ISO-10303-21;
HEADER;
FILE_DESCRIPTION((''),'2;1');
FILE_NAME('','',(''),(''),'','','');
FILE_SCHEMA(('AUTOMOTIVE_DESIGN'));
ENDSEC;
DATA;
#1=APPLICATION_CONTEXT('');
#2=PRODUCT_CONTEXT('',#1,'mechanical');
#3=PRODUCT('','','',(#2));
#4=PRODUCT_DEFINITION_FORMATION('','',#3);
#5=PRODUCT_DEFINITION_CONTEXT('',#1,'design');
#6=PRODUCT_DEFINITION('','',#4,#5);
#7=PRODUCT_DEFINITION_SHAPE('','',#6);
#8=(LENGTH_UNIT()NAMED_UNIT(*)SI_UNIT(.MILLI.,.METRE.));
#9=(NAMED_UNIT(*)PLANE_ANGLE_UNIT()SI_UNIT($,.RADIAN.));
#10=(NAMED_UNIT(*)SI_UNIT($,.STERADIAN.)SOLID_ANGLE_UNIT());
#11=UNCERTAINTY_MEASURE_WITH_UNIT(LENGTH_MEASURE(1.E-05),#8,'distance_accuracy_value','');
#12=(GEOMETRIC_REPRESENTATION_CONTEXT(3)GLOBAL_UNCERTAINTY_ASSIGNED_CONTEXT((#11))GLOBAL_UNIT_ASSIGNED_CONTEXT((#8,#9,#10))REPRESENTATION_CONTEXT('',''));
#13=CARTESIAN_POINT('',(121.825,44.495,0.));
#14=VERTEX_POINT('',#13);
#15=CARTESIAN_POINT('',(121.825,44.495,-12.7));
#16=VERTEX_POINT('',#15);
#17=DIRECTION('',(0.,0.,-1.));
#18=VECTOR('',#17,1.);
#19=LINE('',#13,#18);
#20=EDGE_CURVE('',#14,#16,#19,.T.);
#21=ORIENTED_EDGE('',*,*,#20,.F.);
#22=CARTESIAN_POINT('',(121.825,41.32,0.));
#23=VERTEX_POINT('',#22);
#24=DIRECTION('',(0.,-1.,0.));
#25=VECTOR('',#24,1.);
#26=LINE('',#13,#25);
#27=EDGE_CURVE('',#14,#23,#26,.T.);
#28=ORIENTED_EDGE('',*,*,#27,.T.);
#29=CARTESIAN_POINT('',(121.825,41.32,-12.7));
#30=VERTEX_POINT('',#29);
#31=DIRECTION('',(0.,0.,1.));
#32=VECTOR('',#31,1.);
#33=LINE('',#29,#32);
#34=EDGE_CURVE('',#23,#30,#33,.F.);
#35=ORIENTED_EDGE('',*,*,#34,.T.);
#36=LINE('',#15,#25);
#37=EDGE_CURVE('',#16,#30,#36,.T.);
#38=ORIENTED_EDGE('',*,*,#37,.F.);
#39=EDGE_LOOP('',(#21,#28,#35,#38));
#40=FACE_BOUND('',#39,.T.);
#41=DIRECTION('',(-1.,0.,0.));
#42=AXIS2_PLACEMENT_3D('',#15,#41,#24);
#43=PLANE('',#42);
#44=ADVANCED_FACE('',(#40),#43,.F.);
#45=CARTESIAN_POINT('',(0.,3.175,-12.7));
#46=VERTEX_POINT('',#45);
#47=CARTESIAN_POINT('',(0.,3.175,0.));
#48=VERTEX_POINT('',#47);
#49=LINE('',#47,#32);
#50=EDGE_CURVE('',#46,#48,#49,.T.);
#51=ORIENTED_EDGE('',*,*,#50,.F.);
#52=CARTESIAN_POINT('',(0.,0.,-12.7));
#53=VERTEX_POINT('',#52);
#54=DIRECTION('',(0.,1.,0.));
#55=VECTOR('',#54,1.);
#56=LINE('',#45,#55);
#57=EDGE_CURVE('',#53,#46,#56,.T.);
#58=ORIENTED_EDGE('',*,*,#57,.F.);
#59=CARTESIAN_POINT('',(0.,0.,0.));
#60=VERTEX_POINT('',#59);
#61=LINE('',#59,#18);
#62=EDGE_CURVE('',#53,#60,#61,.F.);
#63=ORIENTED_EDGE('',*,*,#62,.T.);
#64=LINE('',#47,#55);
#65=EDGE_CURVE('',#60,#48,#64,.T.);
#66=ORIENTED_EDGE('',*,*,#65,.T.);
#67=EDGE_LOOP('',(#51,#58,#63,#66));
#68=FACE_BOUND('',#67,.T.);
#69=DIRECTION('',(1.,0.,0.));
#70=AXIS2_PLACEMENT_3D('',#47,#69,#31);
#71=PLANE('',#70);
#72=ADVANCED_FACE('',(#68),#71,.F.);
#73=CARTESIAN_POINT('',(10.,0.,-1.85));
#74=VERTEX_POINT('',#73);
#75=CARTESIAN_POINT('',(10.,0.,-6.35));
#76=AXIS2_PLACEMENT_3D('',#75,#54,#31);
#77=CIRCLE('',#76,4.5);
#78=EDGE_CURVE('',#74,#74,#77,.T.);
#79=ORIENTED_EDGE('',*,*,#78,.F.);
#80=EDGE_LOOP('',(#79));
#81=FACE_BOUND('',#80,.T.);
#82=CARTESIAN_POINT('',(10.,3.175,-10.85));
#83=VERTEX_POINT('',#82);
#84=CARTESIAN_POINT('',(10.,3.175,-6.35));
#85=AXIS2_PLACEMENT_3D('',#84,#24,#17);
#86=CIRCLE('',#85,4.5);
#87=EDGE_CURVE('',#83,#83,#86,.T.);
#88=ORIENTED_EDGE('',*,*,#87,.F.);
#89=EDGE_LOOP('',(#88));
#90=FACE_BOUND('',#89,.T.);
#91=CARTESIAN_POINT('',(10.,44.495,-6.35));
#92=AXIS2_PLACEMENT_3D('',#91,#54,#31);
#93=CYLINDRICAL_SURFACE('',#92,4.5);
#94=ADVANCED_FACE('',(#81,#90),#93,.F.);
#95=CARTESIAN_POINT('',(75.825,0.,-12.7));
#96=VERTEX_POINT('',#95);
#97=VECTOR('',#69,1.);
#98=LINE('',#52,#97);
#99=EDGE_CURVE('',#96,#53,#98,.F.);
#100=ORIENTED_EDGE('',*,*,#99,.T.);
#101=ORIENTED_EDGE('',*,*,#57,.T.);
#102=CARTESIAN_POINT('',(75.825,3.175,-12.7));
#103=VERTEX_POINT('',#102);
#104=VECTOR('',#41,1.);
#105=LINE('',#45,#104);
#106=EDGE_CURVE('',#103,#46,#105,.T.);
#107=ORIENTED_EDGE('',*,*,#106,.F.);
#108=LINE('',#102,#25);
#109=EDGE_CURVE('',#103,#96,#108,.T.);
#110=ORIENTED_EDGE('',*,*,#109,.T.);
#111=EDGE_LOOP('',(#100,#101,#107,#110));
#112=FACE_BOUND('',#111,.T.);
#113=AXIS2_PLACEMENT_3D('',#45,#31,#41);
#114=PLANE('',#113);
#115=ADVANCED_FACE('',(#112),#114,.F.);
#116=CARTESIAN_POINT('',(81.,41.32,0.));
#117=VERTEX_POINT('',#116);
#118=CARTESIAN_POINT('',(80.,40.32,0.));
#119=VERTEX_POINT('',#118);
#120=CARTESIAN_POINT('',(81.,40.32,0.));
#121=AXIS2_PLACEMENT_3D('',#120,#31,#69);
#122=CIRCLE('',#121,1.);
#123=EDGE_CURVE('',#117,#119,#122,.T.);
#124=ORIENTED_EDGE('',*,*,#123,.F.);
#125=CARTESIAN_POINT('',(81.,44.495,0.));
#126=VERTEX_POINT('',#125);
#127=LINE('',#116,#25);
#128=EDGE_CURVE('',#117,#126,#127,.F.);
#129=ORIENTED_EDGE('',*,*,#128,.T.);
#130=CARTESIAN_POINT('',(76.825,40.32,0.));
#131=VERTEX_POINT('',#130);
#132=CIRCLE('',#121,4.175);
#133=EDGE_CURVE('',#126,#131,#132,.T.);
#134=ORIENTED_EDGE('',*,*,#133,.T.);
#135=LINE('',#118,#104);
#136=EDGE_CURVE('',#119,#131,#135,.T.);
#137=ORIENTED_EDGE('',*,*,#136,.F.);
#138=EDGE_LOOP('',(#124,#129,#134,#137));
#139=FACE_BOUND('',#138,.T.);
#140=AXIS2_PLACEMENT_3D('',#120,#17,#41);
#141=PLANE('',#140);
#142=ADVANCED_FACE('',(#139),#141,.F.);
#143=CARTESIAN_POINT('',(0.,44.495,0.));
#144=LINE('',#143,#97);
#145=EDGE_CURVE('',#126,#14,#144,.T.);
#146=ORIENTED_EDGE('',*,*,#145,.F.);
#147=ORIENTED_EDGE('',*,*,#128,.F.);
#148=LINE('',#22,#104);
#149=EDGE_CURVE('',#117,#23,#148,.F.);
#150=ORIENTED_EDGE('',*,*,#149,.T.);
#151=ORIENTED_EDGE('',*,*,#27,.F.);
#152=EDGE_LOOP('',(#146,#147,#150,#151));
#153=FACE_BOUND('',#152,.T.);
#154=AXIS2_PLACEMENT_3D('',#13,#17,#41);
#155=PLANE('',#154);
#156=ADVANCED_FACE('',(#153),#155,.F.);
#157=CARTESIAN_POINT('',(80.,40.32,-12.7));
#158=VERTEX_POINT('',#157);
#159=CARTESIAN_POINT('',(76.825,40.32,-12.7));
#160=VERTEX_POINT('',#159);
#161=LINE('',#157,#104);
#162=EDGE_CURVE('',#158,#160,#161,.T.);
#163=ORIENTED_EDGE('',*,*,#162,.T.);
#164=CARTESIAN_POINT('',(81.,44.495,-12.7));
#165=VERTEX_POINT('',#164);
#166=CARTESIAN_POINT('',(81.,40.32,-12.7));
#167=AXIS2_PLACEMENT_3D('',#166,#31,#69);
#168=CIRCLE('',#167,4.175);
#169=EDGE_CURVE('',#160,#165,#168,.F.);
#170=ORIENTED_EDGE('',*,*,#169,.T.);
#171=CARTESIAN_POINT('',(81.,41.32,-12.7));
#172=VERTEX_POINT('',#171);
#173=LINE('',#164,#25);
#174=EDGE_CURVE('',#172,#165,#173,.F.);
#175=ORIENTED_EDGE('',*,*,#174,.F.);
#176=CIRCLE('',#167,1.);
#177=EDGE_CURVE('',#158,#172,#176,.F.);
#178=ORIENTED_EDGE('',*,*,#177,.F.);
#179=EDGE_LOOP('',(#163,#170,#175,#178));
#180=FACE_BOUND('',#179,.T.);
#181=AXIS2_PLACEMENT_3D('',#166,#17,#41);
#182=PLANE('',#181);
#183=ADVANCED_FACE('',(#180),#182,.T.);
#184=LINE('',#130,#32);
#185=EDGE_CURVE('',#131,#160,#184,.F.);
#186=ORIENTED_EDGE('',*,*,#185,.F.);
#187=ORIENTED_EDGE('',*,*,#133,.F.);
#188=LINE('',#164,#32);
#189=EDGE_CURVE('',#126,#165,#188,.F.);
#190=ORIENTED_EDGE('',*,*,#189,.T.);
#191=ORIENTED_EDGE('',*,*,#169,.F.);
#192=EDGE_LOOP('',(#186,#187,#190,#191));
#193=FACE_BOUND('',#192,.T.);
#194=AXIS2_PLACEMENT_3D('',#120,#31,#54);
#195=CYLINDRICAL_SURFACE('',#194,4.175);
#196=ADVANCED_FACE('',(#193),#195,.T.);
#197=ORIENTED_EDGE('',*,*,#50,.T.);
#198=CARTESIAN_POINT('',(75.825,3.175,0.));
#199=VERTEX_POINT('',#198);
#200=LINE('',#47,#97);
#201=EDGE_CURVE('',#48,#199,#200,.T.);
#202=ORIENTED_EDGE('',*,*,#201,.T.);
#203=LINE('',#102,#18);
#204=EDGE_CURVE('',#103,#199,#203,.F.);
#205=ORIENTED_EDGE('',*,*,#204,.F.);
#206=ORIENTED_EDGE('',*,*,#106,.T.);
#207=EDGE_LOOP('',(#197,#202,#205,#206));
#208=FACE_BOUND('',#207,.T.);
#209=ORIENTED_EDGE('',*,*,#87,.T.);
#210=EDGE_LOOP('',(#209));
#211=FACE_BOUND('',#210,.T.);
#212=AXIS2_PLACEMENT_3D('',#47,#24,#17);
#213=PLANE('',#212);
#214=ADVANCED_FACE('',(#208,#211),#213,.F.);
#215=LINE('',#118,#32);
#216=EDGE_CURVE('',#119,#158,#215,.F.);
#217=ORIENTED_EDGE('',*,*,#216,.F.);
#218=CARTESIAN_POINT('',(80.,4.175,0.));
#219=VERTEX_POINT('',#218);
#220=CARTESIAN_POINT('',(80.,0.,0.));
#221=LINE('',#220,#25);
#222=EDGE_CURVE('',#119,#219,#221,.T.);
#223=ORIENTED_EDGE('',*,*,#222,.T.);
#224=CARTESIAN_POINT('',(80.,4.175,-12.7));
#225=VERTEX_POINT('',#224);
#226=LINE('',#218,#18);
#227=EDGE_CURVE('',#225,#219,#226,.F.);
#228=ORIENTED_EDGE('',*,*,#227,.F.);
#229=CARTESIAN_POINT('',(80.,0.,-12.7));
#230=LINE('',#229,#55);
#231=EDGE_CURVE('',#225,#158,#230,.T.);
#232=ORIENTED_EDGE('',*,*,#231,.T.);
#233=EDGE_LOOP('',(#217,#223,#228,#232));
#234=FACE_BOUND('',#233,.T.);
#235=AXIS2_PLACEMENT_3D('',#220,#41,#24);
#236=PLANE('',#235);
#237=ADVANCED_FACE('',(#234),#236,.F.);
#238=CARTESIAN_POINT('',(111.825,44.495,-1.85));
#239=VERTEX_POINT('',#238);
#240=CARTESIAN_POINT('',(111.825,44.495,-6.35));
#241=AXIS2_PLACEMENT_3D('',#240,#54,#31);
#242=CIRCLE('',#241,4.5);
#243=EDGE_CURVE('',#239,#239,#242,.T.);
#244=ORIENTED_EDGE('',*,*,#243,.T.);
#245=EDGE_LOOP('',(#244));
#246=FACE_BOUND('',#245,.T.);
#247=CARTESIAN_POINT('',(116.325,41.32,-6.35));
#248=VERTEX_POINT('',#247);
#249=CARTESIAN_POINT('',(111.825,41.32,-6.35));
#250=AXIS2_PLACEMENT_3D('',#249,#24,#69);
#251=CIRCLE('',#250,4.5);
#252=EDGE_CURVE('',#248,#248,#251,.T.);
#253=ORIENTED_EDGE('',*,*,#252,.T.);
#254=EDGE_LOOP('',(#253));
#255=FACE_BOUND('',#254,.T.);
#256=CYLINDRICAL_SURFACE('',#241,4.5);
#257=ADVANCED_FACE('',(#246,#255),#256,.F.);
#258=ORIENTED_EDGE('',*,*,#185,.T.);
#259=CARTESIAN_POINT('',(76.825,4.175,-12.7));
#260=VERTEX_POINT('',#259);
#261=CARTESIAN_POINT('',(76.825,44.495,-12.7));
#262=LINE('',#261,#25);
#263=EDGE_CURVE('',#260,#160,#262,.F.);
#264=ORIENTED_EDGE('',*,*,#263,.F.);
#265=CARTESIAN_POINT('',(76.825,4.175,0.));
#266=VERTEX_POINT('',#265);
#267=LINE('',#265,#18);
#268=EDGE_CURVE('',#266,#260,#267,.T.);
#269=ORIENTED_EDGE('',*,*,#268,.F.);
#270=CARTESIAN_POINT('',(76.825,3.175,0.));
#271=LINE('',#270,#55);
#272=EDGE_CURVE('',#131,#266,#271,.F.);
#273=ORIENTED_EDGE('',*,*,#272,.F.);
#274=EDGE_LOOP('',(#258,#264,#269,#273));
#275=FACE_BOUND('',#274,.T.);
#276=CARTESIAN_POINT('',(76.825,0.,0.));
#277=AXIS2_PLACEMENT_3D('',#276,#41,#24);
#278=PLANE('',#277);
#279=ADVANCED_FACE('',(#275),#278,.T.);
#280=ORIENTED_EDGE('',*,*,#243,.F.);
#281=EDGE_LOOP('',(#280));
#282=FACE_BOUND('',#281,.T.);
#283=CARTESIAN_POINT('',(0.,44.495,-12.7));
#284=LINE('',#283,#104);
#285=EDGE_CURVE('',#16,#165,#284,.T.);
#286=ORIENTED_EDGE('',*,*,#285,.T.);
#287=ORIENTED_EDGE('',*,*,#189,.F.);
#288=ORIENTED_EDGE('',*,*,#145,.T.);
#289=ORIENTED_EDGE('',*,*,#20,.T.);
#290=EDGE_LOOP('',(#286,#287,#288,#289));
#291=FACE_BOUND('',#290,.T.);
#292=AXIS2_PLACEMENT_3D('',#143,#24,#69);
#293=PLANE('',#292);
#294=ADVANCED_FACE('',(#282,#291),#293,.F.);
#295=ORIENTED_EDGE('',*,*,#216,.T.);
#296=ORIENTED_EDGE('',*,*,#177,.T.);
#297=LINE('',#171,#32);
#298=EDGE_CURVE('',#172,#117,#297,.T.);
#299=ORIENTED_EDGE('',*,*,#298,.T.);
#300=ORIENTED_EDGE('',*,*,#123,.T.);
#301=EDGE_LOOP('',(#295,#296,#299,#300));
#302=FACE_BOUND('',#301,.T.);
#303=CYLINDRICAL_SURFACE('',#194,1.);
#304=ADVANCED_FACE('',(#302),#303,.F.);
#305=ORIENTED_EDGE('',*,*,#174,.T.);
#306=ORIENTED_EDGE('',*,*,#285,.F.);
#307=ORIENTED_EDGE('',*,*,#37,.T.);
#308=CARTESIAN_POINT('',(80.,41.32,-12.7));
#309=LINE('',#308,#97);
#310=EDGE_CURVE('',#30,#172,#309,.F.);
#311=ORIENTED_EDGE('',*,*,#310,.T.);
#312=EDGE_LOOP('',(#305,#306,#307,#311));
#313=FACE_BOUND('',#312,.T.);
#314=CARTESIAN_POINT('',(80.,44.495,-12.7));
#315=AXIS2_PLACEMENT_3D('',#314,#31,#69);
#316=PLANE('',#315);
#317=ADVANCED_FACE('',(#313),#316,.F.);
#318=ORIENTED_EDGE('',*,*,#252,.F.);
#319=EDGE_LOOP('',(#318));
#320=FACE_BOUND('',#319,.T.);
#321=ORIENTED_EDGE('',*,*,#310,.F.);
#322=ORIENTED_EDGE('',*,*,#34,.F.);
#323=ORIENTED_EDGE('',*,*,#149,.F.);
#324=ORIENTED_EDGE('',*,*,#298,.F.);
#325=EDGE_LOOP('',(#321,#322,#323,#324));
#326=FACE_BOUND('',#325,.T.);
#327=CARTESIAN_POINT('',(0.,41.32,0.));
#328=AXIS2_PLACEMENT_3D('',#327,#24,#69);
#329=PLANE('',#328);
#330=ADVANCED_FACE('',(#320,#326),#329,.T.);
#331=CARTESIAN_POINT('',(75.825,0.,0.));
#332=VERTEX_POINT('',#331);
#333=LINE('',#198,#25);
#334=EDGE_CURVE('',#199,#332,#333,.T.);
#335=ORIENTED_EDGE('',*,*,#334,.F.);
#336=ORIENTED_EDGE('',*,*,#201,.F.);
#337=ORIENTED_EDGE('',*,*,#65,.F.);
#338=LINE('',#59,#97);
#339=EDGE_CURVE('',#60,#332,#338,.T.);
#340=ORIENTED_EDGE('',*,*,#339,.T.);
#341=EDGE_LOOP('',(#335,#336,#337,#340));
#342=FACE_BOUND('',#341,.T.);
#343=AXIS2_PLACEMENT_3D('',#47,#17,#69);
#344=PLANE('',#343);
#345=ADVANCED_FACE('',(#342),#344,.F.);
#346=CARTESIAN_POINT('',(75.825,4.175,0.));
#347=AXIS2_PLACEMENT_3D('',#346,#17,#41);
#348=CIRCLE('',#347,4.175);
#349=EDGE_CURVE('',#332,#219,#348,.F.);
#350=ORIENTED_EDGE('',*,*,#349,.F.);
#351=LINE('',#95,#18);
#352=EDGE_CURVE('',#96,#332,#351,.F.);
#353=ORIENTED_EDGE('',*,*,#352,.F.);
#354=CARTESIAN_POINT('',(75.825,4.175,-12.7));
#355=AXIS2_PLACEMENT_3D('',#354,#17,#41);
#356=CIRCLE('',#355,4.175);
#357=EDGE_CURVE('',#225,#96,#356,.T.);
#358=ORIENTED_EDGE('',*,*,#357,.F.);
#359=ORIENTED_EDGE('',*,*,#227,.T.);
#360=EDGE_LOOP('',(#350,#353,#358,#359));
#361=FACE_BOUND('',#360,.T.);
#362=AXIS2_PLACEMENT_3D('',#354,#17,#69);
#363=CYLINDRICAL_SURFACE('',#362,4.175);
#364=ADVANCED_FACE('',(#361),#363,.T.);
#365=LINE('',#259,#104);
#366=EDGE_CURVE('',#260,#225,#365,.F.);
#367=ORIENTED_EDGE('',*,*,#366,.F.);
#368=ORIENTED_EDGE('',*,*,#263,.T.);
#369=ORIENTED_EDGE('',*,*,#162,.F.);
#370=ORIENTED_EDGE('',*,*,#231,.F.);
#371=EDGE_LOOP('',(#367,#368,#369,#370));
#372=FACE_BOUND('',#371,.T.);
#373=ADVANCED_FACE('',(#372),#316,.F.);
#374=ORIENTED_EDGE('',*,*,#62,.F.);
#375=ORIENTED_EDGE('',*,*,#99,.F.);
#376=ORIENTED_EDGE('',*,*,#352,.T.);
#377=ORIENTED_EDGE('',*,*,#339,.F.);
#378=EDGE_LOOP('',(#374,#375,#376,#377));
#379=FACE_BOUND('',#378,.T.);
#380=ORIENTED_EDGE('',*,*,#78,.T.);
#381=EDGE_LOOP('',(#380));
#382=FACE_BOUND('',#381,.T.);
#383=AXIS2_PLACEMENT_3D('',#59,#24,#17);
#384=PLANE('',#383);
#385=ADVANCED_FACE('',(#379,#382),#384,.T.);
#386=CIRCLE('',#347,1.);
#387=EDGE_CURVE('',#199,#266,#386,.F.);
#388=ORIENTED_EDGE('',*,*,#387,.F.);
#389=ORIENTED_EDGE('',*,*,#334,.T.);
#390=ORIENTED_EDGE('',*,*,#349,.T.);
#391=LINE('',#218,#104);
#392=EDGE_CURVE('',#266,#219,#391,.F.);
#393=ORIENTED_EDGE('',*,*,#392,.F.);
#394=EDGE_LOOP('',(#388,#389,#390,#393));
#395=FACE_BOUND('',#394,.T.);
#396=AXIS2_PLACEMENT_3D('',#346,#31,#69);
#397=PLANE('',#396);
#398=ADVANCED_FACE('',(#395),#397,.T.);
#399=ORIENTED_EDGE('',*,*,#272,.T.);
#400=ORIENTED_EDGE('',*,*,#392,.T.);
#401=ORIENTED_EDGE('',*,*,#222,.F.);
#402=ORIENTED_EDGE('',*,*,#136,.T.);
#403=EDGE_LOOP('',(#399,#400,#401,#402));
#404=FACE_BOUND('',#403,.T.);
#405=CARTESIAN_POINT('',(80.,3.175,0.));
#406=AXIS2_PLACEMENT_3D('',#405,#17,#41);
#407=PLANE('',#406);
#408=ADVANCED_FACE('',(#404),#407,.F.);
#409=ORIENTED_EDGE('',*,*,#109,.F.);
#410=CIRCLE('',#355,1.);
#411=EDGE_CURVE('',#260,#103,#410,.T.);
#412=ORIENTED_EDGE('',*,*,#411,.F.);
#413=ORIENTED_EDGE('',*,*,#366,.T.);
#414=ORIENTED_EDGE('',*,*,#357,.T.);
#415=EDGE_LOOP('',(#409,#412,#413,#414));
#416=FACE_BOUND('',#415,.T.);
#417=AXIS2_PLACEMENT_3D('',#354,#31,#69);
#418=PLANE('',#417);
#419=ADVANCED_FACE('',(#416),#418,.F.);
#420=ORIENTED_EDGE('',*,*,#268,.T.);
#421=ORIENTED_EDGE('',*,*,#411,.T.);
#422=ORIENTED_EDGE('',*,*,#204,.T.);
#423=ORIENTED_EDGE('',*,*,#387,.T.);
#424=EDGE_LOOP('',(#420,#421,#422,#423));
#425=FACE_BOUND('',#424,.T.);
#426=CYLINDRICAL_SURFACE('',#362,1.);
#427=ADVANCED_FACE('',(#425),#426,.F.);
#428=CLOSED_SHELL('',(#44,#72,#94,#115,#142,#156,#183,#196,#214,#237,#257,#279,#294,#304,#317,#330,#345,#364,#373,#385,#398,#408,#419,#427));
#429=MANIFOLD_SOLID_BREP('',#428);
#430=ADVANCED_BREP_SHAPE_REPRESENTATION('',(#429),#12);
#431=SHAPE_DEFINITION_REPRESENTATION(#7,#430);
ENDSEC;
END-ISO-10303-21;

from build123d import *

# Parameters (mm, degrees)
SKETCH1_W                    = 80
SKETCH1_H                    = 12.7
BOSS_EXTRUDE1_DEPTH          = 3.175
EDGE_FLANGE1_STRIP_W         = 14.7
EDGE_FLANGE1_STRIP_H         = 3.175
EDGE_FLANGE1_STRIP_CUT_DEPTH = 12.7
EDGE_FLANGE1_DEPTH           = 12.7
EDGE_FLANGE2_STRIP_W         = 14.7
EDGE_FLANGE2_STRIP_H         = 3.175
EDGE_FLANGE2_STRIP_CUT_DEPTH = 12.7
EDGE_FLANGE2_DEPTH           = 12.7
M8_CLEARANCE_HOLE1_D         = 9


# Sheet-metal steps are written as plain solids
with BuildPart() as part:
    # Sketch1 → Boss-Extrude1 (new body)
    with BuildSketch(Plane(origin=(0, 0, 0), x_dir=(1, 0, 0), z_dir=(0, 1, 0))):
        with Locations((40, 6.35)):
            Rectangle(SKETCH1_W, SKETCH1_H)
    extrude(amount=BOSS_EXTRUDE1_DEPTH)

    # Edge-Flange1 strip (across the edge) → Edge-Flange1 strip cut (cut)
    with BuildSketch(Plane(origin=(80, 3.175, 0), x_dir=(-1, 0, 0), z_dir=(0, 0, -1))):
        with Locations((-3.175, -1.5875)):
            Rectangle(EDGE_FLANGE1_STRIP_W, EDGE_FLANGE1_STRIP_H)
    extrude(amount=EDGE_FLANGE1_STRIP_CUT_DEPTH, mode=Mode.SUBTRACT)

    # Edge-Flange1 section (across the edge) → Edge-Flange1 (add)
    with BuildSketch(Plane(origin=(80, 3.175, 0), x_dir=(-1, 0, 0), z_dir=(0, 0, -1))):
        with BuildLine():
            Line((0, 1), (0, 41.32))
            Line((0, 41.32), (3.175, 41.32))
            Line((3.175, 41.32), (3.175, 1))
            ThreePointArc((3.175, 1), (3.467893219, 0.292893219), (4.175, 0))
            Line((4.175, 0), (4.175, -3.175))
            ThreePointArc((4.175, -3.175), (1.222829189, -1.952170811), (0, 1))
        make_face()
    extrude(amount=EDGE_FLANGE1_DEPTH)

    # Edge-Flange2 strip (across the edge) → Edge-Flange2 strip cut (cut)
    with BuildSketch(Plane(origin=(80, 44.495, -12.7), x_dir=(0, -1, 0), z_dir=(0, 0, 1))):
        with Locations((-3.175, -1.5875)):
            Rectangle(EDGE_FLANGE2_STRIP_W, EDGE_FLANGE2_STRIP_H)
    extrude(amount=EDGE_FLANGE2_STRIP_CUT_DEPTH, mode=Mode.SUBTRACT)

    # Edge-Flange2 section (across the edge) → Edge-Flange2 (add)
    with BuildSketch(Plane(origin=(80, 44.495, -12.7), x_dir=(0, -1, 0), z_dir=(0, 0, 1))):
        with BuildLine():
            Line((0, 1), (0, 41.825))
            Line((0, 41.825), (3.175, 41.825))
            Line((3.175, 41.825), (3.175, 1))
            ThreePointArc((3.175, 1), (3.467893219, 0.292893219), (4.175, 0))
            Line((4.175, 0), (4.175, -3.175))
            ThreePointArc((4.175, -3.175), (1.222829189, -1.952170811), (0, 1))
        make_face()
    extrude(amount=EDGE_FLANGE2_DEPTH)

    # M8 Clearance Hole1 (through all)
    with Locations(Plane(origin=(0, 44.495, 0), x_dir=(1, 0, 0), z_dir=(0, 1, 0))):
        with Locations((111.825, 6.35), (10, 6.35)):
            Hole(M8_CLEARANCE_HOLE1_D / 2)


solid = part.part
